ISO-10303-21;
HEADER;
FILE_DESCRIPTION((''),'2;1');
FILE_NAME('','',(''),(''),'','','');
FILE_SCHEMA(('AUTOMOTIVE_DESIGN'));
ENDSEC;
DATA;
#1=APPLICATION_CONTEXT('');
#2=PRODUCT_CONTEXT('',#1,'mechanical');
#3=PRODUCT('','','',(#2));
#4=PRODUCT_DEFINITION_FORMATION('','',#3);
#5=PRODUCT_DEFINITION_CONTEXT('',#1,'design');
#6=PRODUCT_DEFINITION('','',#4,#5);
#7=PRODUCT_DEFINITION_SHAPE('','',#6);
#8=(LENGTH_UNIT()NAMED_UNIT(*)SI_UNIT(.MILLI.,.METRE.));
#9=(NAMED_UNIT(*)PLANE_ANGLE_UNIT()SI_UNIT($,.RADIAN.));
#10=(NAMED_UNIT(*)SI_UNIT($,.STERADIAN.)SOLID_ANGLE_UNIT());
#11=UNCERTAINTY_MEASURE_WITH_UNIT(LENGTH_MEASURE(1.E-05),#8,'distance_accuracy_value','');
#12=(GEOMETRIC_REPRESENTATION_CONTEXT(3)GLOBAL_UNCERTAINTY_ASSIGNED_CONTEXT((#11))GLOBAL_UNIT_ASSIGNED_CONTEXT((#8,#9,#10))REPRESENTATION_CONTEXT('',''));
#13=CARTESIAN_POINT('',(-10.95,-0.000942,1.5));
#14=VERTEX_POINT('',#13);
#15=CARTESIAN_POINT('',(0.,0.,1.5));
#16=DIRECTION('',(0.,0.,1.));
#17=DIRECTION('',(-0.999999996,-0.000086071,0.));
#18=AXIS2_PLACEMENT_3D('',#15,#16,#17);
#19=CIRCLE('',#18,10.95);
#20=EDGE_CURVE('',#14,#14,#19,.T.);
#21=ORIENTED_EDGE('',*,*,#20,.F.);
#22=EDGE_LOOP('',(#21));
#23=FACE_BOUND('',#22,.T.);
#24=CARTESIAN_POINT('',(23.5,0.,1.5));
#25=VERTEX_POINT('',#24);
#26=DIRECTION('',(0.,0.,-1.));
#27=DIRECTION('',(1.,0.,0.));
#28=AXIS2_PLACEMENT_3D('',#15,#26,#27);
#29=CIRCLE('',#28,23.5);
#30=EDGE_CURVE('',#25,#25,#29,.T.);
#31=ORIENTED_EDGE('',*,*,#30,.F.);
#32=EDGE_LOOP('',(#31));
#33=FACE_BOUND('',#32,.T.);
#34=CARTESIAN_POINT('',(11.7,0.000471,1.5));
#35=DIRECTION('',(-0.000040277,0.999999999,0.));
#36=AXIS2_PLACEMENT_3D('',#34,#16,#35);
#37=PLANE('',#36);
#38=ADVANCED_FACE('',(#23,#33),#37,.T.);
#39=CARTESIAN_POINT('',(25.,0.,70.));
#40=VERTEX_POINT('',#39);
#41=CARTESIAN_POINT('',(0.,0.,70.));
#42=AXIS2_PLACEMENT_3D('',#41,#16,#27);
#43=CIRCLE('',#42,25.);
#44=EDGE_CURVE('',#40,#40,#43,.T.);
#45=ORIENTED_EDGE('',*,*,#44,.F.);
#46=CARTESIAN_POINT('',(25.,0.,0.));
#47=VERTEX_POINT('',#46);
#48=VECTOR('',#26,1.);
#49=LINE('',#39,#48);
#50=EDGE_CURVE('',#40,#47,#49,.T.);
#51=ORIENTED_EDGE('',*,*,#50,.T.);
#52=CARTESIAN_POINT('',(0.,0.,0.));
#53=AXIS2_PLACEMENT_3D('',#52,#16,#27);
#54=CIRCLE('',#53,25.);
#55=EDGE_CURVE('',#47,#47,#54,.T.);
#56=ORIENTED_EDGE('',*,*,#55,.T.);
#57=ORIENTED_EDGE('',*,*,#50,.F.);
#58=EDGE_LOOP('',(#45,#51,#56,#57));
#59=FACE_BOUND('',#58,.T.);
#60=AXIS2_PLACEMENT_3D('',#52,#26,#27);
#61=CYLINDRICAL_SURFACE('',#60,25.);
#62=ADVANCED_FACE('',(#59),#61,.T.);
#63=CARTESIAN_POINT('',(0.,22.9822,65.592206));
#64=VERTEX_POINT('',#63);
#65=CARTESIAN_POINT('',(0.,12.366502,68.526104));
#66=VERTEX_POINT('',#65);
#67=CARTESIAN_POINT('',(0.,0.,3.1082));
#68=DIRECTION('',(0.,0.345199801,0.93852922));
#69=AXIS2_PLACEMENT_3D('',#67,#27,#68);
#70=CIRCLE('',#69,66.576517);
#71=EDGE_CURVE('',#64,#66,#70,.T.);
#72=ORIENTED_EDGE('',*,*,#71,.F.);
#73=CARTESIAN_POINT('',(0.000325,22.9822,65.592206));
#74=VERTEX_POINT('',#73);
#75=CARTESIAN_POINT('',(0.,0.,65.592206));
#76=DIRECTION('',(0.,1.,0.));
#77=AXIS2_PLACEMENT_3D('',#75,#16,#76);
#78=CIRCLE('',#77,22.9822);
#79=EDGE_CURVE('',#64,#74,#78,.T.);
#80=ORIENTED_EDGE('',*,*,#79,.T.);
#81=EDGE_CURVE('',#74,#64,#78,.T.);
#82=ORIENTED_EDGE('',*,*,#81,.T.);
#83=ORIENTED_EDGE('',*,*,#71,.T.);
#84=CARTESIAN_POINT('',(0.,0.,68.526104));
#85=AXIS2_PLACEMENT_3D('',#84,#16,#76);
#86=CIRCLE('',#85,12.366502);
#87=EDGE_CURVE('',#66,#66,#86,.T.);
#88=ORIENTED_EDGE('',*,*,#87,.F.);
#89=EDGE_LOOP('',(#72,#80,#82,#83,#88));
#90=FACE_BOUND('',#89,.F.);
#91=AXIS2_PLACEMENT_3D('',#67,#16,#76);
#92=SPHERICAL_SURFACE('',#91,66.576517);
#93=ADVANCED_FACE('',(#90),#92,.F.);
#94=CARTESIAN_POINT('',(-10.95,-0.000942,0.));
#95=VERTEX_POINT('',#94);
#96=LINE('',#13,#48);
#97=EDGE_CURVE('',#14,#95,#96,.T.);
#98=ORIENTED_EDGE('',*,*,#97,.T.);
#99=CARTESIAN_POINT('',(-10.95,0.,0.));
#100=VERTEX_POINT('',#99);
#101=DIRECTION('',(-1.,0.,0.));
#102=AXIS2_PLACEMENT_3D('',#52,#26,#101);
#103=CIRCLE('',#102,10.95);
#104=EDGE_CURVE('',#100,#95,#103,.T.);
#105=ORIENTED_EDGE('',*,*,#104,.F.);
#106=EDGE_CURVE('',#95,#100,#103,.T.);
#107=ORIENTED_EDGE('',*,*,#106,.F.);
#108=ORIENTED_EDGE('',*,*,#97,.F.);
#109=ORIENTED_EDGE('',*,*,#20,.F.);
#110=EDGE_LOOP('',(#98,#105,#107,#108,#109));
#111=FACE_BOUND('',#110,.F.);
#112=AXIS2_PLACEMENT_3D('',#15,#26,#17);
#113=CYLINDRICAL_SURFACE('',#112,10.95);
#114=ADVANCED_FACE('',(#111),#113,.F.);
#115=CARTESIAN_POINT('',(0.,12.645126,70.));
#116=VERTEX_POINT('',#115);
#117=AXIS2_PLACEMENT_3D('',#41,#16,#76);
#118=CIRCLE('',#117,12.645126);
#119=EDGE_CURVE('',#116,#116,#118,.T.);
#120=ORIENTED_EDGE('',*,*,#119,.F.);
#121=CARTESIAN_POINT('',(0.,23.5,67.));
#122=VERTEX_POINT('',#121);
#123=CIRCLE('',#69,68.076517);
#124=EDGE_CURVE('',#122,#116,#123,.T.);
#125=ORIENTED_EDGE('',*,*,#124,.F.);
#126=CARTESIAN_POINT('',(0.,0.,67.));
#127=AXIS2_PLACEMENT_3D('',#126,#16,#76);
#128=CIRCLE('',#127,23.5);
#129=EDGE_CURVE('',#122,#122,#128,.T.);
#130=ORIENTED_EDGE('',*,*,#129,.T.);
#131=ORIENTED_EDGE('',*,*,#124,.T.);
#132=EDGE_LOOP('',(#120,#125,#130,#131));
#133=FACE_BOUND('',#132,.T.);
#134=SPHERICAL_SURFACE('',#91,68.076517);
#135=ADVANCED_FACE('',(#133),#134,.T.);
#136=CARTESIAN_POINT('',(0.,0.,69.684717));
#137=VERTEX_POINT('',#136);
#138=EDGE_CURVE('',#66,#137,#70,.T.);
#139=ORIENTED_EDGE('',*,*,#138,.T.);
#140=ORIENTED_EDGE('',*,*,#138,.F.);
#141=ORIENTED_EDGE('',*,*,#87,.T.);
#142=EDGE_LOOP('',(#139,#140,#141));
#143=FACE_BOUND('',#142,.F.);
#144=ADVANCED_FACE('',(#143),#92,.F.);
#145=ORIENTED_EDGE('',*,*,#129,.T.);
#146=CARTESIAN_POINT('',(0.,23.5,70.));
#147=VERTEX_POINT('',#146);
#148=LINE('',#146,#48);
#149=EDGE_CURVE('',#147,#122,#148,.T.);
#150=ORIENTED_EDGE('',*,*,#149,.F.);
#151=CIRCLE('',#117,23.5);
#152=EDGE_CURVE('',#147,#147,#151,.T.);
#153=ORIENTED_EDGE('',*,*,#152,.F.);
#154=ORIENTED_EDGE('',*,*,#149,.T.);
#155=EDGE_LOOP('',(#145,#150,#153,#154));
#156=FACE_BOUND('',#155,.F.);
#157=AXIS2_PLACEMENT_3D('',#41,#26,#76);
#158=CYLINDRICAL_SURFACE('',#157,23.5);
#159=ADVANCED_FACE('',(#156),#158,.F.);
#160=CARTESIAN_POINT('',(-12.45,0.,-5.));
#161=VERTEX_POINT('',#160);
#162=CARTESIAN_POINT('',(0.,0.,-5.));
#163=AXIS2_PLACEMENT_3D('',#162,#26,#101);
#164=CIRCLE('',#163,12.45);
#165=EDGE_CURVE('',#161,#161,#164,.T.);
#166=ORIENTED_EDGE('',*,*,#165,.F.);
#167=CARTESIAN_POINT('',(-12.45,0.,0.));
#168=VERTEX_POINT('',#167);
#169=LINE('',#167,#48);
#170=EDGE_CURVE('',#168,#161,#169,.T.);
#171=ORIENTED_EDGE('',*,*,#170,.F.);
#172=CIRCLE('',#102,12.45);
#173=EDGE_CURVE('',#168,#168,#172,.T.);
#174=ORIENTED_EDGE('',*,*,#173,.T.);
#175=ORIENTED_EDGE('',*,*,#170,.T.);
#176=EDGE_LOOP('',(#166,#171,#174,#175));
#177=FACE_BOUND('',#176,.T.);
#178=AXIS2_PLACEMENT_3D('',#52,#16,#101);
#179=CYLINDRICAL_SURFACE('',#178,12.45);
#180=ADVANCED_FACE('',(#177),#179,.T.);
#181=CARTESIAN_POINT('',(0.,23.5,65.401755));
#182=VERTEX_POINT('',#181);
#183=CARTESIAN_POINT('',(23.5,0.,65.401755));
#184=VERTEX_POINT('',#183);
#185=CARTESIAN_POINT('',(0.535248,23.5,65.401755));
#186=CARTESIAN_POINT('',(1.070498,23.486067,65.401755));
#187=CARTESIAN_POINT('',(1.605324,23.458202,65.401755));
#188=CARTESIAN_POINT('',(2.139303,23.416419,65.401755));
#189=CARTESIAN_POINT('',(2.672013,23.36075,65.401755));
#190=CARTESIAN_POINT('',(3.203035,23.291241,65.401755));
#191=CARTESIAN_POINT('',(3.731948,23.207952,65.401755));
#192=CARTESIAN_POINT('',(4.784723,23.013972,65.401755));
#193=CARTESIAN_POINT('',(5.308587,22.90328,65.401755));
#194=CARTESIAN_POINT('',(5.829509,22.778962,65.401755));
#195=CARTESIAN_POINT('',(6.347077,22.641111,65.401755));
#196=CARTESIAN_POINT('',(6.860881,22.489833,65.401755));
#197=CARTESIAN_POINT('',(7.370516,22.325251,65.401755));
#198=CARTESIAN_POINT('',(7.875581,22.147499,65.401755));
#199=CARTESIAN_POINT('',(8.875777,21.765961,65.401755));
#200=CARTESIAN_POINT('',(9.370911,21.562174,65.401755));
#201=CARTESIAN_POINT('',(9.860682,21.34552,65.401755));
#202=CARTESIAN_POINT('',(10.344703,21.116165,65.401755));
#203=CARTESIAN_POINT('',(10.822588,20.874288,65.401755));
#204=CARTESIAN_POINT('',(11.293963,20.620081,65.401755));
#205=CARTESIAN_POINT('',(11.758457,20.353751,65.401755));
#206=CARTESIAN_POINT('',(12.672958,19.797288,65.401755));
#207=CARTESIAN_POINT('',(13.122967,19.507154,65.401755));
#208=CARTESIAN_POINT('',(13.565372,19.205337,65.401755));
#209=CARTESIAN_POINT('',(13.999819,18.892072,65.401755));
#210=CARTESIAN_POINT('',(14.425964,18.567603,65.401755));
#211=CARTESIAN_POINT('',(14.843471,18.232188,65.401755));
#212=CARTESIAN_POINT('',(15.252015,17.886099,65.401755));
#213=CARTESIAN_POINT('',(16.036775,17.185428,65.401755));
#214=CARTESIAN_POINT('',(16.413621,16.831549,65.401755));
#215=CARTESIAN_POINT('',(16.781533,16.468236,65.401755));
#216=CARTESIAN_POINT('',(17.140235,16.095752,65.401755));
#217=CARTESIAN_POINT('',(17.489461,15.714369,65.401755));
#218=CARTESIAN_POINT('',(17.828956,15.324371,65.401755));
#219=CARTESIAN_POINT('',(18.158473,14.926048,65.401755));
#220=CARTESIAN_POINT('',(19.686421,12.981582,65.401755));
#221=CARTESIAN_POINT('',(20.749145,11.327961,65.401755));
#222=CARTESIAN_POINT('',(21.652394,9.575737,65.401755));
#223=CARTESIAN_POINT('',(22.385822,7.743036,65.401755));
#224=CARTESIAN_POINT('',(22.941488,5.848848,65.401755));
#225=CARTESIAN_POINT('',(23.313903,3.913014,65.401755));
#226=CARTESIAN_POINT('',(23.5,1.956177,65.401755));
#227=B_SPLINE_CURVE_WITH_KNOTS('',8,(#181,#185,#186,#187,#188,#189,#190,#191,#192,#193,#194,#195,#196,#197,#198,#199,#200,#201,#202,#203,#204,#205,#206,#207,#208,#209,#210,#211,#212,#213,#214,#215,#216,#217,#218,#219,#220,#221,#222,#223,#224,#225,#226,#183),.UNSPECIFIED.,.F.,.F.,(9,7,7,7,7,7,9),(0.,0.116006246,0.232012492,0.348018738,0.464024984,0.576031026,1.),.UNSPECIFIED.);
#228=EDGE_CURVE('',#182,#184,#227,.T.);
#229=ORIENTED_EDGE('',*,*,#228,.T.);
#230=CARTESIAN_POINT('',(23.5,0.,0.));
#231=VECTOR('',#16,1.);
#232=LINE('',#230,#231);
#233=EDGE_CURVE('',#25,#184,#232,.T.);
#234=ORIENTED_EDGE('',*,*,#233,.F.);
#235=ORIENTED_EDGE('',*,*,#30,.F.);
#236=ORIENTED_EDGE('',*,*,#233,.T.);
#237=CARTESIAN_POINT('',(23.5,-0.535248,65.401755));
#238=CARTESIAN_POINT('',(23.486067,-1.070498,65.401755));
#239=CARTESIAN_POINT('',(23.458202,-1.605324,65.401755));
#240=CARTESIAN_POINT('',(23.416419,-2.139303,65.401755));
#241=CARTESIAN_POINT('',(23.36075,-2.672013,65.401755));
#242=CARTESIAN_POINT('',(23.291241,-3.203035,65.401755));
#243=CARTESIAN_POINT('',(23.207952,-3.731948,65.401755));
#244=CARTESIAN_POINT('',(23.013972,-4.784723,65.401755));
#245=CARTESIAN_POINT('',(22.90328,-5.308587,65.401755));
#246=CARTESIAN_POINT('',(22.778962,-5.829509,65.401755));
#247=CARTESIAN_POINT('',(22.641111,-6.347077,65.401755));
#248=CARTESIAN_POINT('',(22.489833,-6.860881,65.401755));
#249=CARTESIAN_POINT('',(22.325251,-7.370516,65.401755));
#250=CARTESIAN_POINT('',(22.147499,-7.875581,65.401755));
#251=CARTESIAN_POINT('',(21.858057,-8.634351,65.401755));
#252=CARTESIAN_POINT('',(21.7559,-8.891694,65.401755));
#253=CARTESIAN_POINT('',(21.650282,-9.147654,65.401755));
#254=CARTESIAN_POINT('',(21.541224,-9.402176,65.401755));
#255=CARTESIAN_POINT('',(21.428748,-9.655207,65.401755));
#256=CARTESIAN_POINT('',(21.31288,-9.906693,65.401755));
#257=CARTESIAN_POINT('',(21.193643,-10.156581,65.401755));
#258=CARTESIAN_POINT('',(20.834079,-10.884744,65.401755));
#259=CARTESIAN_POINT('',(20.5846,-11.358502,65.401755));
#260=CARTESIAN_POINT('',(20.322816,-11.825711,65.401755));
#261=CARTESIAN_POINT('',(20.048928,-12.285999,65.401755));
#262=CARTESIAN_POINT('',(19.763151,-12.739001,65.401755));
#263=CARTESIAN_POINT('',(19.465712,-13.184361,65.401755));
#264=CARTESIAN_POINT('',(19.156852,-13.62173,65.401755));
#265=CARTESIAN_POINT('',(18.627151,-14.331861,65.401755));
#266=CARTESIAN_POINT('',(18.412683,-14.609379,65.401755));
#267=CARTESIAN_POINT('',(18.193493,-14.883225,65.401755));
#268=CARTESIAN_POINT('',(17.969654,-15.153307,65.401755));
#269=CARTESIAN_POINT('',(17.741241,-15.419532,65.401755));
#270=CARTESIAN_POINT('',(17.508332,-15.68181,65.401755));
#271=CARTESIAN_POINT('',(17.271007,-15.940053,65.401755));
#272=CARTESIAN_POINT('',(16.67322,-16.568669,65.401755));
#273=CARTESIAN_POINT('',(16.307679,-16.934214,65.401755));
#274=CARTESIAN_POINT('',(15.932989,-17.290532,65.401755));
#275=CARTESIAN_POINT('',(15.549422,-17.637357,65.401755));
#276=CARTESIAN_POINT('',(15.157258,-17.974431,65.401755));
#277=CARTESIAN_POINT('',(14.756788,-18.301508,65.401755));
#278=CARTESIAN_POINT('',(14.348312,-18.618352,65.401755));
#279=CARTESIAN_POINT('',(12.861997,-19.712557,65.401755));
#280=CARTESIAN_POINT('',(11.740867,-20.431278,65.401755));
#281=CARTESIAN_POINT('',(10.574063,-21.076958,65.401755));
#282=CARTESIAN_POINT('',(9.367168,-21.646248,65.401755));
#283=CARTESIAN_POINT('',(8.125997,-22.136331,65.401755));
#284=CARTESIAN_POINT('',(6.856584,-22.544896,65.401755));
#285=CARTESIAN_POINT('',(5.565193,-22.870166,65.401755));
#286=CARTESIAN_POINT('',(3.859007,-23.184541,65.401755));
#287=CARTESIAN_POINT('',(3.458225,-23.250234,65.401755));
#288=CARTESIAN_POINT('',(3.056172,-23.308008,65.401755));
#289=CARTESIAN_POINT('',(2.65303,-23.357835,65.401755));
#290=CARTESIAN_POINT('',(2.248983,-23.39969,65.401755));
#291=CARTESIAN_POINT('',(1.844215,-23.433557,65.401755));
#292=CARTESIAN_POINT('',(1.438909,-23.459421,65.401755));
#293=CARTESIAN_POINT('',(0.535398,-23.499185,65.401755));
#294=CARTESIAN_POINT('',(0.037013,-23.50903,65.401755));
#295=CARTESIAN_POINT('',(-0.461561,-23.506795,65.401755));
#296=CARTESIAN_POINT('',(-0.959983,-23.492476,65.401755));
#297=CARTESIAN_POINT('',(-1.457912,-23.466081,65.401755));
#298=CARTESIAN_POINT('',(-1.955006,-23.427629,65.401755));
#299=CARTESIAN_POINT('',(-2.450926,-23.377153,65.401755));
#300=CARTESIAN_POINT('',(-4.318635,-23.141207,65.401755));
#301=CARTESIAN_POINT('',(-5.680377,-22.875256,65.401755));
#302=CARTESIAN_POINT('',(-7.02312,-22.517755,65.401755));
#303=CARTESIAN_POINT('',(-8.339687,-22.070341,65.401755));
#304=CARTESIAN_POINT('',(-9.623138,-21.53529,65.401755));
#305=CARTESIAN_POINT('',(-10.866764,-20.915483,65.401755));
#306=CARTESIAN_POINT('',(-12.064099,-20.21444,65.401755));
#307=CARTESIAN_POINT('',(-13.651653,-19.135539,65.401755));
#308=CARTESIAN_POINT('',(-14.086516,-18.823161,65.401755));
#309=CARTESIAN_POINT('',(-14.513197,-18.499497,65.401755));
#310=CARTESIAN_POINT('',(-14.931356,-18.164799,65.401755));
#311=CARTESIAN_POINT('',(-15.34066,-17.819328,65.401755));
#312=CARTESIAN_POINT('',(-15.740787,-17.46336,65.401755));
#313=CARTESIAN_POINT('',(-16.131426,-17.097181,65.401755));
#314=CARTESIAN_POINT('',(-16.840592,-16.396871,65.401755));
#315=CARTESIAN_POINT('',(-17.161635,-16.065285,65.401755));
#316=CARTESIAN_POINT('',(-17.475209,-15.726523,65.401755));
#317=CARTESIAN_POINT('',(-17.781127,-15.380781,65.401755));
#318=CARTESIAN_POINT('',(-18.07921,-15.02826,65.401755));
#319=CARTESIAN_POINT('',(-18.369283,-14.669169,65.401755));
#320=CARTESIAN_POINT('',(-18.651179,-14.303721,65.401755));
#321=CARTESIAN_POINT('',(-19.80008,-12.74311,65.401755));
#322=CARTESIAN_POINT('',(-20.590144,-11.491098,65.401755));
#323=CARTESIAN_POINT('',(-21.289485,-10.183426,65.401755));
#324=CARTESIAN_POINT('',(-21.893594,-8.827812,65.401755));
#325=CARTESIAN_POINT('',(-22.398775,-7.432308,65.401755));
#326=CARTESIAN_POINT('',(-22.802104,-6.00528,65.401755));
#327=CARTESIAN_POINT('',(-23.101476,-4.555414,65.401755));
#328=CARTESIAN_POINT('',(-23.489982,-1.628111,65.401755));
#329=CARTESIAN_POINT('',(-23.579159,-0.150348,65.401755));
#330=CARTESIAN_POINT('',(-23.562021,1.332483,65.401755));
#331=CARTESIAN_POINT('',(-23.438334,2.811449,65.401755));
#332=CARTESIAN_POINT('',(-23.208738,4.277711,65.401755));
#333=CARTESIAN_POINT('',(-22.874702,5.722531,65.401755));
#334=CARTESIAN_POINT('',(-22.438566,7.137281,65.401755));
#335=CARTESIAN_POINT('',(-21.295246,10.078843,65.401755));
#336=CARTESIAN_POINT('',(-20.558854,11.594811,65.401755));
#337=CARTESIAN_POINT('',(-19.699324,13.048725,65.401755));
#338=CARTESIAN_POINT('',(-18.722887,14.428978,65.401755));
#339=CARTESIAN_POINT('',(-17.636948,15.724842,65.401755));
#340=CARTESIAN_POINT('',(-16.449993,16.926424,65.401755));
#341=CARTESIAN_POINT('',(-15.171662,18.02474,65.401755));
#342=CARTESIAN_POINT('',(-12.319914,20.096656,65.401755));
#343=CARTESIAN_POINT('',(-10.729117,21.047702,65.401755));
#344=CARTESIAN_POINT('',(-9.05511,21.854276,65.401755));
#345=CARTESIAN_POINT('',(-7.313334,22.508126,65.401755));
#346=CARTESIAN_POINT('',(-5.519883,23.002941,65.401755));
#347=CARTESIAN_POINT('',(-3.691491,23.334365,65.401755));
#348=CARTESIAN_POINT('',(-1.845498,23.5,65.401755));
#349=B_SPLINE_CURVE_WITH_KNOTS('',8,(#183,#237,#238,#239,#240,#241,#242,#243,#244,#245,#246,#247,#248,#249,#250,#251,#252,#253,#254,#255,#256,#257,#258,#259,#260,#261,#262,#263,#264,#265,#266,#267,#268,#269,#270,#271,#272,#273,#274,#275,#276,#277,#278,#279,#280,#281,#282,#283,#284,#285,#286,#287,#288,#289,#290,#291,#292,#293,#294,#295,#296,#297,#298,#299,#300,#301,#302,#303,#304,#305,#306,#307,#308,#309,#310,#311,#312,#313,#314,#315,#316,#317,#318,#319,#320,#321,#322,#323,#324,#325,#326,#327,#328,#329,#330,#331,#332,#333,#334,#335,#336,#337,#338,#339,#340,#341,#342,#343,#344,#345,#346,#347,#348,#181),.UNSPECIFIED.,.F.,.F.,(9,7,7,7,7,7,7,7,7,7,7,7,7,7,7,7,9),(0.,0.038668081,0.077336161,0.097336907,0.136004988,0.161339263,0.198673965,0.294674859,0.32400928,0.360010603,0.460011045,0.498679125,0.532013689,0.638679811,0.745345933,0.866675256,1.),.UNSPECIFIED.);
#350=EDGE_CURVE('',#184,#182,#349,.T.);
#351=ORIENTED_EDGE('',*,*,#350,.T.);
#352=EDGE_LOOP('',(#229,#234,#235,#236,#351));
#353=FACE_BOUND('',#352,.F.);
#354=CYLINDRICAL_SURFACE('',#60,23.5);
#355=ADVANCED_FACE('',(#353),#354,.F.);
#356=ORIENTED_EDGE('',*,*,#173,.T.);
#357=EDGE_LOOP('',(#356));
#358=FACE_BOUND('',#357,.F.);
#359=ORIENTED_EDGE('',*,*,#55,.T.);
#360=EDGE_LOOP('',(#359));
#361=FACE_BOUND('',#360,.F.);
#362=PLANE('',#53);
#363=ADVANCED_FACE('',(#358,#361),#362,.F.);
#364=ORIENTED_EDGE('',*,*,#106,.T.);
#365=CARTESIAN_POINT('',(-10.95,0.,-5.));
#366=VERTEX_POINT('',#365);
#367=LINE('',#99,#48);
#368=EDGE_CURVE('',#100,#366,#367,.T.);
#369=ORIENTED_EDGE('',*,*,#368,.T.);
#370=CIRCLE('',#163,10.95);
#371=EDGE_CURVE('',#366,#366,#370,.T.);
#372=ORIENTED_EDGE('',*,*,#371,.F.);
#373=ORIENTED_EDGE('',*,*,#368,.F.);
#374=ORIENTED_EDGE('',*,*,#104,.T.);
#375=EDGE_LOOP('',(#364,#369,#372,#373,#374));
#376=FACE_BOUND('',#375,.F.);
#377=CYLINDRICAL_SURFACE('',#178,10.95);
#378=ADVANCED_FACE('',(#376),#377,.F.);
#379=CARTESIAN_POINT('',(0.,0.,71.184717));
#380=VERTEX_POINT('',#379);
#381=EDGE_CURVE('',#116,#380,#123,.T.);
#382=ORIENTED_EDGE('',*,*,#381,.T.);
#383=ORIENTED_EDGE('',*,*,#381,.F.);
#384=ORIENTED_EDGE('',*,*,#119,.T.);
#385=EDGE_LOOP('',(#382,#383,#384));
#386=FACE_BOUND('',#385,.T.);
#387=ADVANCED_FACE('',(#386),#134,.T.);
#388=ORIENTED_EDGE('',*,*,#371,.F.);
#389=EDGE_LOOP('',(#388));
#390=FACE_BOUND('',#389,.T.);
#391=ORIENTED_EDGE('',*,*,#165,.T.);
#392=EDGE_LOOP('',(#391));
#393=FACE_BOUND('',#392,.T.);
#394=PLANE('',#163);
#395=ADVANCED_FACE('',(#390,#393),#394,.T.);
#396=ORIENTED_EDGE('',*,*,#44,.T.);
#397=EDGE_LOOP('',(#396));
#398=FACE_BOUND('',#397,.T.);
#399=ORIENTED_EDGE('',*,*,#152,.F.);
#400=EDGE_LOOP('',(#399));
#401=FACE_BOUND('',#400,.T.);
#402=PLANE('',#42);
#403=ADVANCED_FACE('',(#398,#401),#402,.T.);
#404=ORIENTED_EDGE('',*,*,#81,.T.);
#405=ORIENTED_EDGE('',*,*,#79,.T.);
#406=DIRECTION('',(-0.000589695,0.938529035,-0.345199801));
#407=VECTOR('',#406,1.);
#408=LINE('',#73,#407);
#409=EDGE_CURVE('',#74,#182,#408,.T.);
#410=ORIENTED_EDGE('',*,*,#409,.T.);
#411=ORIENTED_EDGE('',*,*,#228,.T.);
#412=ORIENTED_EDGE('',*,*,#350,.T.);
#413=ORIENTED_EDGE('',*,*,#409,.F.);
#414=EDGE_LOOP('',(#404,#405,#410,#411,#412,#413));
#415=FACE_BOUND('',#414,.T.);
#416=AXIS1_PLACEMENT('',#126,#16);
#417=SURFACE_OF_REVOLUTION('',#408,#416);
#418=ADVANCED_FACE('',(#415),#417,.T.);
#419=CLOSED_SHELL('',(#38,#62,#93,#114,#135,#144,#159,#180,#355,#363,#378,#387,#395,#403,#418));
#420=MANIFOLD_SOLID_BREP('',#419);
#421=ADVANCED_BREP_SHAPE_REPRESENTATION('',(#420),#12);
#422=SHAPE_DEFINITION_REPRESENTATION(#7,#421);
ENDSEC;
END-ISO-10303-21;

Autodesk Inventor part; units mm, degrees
ref_plane "YZ Plane" through (0, 0, 0) normal (1, 0, 0) x (0, 1, 0)
ref_plane "XZ Plane" through (0, 0, 0) normal (0, 1, 0) x (-1, 0, 0)
ref_plane "XY Plane" through (0, 0, 0) normal (0, 0, 1) x (1, 0, 0)
sketch "Sketch1" plane through (0, 0, 0) normal (0, 0, 1) x (1, 0, 0)
  circle A0 centre (0, 0) radius 25
  dimension "d0" = 50
extrude "Lens Body" add sketch "Sketch1" along normal blind 70
sketch "Sketch2" plane through (0, 0, 0) normal (0, 0, -1) x (-1, 0, 0)
  circle A0 centre (0, 0) radius 12.45
  circle A1 centre (0, 0) radius 10.95
  dimension "d3" = 24.9
  dimension "d4" = 1.5
extrude "Camera Mount" add sketch "Sketch2" along normal blind 5
sketch "Sketch4" plane through (0, 0, 0) normal (1, 0, 0) x (0, 1, 0)
  line L0 (25, 70) -> (-25, 70) projected
  line L1 (25, 0) -> (-25, 0) projected
  line L2 (25, 70) -> (-25, 70) projected
  line L3 (-25, 0) -> (-25, 70) projected
  line L4 (25, 70) -> (-25, 70)
  line L5 (-25, 70) -> (-25, 67)
  line L6 (-25, 67) -> (25, 67)
  line L7 (25, 67) -> (25, 70)
  line L8 (25, 70) -> (-25, 70) projected
  line L9 (23.5, 70) -> (23.5, 67)
  line L10 (0, 70) -> (0, 67)
  line L11 (-23.5, 70) -> (-23.5, 67)
  arc A0 (23.5, 67) -> (-23.5, 67) centre (0, 3.1082) ccw
  line L12 (0, -20.2369) -> (0, 86.4217) projected
  point P0 (0, 0)
  point P1 (12.6451, 70)
  point P2 (0, 71.1847)
  dimension "d7" = 3
  dimension "d8" = 47
revolve "Remove Material" cut sketch "Sketch4" angle 360 about axis through (0, 0, -10) along (0, 0, 1) contours L9 A0 L0
revolve "Convex Lens Shape" add sketch "Sketch4" angle 360 about axis through (0, 0, -10) along (0, 0, 1) picked at (7.0342, 70.2191) contours L0 L12 A0
shell "Hollow Out" thickness 1.5 removed faces 1 at (3.1259, -0.8227, 0)
properties part number "35mmLens"
